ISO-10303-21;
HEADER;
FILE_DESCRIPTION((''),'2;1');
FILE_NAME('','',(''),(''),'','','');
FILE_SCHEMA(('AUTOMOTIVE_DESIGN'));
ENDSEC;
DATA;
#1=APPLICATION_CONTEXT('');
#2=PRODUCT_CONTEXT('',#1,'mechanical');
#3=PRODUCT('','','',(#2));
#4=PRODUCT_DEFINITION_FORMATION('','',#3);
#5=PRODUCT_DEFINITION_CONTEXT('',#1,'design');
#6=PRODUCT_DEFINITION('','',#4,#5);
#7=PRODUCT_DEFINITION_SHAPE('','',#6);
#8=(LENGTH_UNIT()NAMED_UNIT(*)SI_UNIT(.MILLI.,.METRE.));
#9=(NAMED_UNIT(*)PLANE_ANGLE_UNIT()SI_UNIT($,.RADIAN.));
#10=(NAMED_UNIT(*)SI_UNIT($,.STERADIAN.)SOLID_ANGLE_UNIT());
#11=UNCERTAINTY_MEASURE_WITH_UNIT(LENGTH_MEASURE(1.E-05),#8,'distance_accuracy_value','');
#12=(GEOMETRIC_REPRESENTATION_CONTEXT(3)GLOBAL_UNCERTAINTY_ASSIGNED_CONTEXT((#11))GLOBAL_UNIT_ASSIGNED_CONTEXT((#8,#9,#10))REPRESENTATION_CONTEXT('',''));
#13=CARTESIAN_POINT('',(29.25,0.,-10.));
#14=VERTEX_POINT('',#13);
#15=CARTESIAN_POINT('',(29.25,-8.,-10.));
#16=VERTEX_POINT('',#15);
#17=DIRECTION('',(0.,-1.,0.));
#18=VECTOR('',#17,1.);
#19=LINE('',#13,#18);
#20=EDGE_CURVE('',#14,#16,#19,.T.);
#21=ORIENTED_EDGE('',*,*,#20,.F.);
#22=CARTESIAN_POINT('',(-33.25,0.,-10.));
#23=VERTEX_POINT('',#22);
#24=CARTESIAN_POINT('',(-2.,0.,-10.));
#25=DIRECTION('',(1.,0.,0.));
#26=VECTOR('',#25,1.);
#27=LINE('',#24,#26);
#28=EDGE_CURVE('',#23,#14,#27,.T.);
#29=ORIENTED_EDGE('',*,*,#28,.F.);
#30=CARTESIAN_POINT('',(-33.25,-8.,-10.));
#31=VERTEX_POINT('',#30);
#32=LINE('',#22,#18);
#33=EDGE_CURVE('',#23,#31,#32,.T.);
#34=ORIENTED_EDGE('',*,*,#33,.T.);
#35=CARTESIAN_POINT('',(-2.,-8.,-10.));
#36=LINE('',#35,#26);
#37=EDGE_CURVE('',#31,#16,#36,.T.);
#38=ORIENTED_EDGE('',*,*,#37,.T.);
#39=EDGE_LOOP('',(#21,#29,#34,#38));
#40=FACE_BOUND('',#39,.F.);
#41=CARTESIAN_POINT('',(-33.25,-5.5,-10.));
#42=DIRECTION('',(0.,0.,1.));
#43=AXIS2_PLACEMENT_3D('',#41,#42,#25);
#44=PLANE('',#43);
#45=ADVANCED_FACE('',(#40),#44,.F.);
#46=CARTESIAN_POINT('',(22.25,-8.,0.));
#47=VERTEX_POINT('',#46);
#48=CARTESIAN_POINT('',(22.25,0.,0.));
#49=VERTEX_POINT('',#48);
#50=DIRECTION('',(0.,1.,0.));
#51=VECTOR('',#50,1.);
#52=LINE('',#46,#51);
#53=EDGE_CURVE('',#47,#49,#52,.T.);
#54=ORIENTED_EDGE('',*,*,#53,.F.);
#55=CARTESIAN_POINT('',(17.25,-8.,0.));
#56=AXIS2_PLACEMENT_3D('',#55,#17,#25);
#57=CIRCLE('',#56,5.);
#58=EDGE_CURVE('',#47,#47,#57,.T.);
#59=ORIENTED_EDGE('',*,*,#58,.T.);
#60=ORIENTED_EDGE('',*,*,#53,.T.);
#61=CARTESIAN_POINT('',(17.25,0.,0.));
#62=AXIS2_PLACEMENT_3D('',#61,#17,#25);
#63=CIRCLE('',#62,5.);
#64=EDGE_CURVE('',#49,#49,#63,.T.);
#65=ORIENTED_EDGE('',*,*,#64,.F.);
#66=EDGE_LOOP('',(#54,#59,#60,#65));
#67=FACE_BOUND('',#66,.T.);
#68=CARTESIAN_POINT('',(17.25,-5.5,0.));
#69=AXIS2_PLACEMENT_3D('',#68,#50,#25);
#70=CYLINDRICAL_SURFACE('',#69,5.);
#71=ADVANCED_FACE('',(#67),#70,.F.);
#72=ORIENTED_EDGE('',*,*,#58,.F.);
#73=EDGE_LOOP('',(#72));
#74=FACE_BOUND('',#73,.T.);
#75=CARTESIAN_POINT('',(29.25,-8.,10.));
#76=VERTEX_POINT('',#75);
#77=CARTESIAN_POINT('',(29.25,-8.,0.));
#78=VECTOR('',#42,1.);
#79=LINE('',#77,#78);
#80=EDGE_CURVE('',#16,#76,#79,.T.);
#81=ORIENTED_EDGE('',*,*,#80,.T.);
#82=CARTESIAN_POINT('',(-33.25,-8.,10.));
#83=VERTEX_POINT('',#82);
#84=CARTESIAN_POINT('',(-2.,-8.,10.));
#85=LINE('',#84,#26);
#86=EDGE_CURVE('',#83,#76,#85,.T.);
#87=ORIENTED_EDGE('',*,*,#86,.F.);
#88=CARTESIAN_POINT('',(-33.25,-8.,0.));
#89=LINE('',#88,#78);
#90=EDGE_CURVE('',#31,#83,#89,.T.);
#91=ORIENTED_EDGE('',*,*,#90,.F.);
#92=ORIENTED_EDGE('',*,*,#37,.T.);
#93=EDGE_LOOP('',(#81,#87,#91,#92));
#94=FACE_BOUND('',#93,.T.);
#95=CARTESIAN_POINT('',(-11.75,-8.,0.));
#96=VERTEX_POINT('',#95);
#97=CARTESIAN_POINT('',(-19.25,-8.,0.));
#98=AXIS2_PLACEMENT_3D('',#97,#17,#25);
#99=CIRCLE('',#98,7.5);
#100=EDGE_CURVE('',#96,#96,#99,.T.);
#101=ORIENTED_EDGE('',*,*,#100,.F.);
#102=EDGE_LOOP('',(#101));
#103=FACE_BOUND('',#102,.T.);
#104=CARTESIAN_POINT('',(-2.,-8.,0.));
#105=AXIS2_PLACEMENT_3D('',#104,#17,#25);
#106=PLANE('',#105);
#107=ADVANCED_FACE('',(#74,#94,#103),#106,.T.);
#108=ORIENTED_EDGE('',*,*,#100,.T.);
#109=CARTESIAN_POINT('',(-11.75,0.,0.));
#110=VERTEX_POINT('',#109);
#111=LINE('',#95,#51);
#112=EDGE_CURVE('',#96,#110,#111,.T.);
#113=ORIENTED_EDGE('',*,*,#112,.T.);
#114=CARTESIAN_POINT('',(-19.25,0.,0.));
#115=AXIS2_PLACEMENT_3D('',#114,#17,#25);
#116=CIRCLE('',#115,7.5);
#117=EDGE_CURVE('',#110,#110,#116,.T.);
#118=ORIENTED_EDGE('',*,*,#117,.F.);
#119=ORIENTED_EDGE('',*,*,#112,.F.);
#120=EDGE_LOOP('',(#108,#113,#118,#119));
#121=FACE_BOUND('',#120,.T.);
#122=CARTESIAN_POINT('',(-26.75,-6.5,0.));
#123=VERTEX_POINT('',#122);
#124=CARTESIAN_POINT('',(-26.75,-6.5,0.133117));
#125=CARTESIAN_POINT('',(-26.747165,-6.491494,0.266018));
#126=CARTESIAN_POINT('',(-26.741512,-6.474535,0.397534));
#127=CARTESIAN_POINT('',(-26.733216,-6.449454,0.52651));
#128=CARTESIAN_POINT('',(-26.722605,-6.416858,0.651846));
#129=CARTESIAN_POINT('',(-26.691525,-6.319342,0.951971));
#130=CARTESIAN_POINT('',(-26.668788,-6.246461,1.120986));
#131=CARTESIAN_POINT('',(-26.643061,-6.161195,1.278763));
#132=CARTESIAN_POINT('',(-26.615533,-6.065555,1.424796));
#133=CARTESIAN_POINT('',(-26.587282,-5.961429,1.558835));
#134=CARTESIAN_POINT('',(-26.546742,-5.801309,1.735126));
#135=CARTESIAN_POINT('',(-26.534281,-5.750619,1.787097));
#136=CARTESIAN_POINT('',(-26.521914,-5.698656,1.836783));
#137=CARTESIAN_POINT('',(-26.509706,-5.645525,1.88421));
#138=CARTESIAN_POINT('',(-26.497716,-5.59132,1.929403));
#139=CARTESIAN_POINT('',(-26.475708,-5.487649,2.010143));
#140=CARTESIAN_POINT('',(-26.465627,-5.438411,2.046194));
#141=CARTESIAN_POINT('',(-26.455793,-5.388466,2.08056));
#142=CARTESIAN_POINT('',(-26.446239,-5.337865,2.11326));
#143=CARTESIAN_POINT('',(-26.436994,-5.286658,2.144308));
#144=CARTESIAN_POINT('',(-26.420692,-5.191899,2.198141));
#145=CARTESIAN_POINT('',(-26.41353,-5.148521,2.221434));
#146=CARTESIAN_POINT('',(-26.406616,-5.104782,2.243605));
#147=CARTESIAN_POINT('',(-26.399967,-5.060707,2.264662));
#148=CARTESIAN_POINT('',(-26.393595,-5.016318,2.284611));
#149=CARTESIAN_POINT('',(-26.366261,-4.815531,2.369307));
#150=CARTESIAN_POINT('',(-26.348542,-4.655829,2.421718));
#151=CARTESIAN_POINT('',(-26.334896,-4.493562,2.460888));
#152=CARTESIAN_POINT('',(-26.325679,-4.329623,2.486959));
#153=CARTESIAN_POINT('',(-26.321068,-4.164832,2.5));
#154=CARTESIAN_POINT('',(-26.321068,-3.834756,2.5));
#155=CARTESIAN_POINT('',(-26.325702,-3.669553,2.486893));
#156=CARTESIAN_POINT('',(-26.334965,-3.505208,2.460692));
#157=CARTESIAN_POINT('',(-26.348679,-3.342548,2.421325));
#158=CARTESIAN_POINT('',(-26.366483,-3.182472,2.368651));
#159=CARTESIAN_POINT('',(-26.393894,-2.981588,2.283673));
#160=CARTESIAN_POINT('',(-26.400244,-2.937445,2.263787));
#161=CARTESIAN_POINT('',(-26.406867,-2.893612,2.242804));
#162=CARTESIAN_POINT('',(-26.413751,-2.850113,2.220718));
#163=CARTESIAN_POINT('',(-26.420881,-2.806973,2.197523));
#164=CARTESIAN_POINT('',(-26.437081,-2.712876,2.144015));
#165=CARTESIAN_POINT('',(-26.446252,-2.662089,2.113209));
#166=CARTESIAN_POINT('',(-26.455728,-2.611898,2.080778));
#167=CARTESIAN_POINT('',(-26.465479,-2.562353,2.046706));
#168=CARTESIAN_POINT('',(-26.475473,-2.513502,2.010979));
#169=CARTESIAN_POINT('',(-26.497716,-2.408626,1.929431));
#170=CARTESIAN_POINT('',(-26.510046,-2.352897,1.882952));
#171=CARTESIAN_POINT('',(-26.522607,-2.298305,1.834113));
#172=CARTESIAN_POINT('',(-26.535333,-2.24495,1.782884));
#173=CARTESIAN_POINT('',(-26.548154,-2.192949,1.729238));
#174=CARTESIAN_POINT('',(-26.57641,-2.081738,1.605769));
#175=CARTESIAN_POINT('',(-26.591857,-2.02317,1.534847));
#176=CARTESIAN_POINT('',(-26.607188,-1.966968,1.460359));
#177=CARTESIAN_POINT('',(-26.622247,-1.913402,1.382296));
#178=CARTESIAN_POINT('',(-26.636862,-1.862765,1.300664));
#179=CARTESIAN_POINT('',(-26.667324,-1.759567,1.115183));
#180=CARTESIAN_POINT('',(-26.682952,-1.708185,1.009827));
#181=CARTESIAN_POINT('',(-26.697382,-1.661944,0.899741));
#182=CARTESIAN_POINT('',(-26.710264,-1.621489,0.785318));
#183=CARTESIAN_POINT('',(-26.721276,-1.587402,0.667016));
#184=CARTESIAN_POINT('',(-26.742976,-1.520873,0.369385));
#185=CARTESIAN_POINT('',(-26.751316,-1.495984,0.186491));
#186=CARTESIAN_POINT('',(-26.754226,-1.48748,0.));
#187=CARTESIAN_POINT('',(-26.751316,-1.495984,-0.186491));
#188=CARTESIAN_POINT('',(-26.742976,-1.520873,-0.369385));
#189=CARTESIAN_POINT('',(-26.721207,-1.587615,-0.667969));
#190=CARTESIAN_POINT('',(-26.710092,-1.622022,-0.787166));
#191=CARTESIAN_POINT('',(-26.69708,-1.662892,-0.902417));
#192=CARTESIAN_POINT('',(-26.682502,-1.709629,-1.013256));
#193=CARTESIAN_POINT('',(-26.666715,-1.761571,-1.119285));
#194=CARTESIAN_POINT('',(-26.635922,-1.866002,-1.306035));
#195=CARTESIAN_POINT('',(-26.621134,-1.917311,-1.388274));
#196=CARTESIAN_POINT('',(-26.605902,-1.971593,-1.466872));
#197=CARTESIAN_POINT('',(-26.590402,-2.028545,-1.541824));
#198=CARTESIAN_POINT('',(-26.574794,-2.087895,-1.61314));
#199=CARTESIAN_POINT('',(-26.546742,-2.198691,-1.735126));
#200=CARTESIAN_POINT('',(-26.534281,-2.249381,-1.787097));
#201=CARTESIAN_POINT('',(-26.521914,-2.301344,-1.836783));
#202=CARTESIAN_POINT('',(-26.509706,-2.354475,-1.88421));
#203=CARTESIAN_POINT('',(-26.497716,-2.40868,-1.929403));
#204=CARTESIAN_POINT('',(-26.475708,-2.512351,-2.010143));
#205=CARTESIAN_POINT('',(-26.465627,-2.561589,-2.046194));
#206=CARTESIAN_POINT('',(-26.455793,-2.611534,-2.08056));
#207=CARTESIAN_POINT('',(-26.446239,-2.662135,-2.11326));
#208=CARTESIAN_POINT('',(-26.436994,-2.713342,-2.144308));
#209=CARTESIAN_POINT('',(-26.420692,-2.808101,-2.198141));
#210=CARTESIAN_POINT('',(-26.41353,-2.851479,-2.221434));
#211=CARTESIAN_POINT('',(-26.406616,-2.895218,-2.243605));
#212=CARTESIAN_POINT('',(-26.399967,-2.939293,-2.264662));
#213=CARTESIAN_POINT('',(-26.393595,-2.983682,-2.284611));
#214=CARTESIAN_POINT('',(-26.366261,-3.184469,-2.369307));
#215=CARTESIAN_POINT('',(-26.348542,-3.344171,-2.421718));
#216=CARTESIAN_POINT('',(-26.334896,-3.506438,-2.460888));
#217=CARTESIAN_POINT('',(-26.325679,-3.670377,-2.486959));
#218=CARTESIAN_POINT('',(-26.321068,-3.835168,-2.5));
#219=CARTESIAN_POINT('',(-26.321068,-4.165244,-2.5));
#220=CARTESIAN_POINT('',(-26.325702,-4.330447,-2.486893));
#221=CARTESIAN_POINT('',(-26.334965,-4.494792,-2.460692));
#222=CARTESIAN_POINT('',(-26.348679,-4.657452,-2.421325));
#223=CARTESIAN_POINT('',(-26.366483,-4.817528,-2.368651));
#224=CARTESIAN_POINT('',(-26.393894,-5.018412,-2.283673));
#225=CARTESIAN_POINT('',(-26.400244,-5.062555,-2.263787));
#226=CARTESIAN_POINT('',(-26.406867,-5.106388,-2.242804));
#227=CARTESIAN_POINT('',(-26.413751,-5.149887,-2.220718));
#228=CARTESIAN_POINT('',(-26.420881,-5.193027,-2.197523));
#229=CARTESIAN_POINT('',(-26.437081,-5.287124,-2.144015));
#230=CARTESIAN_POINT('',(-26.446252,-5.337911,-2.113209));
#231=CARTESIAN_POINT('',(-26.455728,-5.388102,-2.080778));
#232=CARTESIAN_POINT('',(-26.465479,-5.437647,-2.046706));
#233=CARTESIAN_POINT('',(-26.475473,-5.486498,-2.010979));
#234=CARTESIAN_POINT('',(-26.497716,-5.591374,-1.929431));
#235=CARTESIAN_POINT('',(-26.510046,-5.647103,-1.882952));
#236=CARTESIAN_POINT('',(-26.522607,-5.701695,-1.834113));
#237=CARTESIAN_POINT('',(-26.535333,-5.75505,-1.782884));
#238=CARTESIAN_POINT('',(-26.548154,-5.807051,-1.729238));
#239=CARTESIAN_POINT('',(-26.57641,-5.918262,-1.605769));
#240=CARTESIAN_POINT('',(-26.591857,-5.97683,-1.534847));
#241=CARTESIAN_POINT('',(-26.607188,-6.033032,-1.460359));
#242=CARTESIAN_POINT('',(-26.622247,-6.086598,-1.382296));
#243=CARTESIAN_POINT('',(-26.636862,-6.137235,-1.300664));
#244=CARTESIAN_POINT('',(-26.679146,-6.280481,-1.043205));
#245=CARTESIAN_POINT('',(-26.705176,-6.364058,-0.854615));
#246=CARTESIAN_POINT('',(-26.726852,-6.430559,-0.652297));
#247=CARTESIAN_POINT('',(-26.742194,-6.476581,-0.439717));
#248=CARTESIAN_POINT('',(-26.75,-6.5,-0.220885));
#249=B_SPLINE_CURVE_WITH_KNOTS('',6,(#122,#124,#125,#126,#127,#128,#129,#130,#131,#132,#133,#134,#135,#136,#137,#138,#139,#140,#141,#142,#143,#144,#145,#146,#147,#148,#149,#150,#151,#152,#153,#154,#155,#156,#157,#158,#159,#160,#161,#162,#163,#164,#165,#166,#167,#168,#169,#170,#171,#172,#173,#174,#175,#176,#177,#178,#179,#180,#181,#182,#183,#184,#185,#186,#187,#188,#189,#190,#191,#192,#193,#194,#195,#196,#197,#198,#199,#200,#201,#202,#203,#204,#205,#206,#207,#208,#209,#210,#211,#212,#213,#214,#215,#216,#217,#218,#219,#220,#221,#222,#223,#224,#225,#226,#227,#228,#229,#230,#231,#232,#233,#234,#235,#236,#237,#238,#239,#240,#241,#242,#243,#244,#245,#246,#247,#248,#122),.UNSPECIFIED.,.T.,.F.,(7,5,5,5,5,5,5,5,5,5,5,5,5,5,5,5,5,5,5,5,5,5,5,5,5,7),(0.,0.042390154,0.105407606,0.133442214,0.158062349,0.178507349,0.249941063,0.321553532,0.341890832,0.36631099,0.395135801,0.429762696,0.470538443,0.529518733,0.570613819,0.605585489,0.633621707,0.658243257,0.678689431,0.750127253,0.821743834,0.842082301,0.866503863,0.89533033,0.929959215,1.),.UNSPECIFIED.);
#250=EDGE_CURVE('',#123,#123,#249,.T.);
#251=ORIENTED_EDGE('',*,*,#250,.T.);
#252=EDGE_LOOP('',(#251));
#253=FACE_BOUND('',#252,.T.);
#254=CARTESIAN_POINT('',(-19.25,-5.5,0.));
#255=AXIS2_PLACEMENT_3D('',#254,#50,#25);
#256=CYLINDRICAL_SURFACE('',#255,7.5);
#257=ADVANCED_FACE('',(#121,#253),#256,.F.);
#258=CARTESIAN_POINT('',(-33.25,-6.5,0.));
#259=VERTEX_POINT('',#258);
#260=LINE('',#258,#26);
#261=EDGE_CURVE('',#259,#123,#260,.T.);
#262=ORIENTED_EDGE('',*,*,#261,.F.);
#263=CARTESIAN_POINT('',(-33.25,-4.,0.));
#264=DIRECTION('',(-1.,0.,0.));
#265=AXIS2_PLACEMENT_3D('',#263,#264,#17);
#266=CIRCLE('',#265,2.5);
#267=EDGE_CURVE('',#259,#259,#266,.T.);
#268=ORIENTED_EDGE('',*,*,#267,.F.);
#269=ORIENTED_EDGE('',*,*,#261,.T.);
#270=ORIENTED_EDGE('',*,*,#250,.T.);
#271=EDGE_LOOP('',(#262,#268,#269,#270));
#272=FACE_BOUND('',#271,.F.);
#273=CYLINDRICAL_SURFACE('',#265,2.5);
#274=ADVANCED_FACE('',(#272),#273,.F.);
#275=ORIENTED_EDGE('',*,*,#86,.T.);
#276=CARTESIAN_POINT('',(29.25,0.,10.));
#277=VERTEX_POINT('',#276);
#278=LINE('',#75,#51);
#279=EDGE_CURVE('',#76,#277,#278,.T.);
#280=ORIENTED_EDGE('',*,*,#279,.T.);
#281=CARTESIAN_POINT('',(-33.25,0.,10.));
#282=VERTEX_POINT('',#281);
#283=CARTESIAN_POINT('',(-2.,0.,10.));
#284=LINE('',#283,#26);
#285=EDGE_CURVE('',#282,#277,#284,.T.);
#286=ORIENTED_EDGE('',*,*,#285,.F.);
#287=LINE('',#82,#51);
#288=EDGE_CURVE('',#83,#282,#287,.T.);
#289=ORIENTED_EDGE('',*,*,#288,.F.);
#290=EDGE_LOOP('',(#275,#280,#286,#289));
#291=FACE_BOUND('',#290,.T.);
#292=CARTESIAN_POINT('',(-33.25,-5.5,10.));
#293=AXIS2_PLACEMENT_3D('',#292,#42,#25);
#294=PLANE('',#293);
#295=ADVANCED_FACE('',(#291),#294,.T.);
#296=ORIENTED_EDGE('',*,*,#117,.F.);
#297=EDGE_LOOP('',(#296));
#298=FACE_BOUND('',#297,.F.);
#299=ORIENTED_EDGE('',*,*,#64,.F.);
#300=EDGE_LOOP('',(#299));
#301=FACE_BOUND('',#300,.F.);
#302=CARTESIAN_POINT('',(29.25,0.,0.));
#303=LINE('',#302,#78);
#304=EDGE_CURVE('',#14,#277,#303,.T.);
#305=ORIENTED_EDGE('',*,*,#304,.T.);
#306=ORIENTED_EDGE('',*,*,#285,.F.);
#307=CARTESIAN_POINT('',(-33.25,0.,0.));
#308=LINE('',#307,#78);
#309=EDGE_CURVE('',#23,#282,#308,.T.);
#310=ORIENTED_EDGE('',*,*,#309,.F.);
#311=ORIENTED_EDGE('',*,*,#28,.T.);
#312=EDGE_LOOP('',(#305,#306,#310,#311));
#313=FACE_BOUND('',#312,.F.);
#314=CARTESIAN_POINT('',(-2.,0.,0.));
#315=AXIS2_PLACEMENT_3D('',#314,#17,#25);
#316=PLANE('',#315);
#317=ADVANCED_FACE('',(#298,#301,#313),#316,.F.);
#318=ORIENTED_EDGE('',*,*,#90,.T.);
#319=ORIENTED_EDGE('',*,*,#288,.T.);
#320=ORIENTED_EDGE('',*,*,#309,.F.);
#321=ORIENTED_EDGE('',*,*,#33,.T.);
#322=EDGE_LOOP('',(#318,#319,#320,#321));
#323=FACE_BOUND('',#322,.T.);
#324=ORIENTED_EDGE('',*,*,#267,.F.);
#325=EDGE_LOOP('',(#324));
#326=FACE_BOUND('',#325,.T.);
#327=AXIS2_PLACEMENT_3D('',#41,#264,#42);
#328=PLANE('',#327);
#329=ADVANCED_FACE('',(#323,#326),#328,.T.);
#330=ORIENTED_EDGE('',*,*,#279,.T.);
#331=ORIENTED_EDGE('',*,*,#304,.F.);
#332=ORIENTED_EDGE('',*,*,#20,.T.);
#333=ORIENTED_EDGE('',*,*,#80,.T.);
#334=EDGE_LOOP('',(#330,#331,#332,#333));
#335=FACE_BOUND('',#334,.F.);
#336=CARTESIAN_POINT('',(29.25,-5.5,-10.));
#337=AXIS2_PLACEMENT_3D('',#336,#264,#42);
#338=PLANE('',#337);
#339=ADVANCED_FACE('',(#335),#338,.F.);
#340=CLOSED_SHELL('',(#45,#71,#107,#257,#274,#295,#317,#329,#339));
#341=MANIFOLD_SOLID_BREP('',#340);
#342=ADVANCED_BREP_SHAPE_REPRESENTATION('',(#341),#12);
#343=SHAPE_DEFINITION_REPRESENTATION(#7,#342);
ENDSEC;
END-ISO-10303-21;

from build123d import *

# Parameters (mm, degrees)
F0_W     = 62.5
F0_H     = 20
F0_R     = 7.5
F0_R_2   = 5
F1_DEPTH = 5.5
F2_DEPTH = 2.5
F3_R     = 2.5
F4_DEPTH = 10


# Not quite as in the source:
# - a feature names something its author has since deleted; it is built from what else it names


with BuildPart() as f1:
    # F0 (on Front) → F1 (new body)
    with BuildSketch(Plane.XZ):
        with Locations((-2, 0)):
            Rectangle(F0_W, F0_H)
        with Locations((-19.25, 0)):
            Circle(F0_R, mode=Mode.SUBTRACT)
        with Locations((17.25, 0)):
            Circle(F0_R_2, mode=Mode.SUBTRACT)
    extrude(amount=F1_DEPTH)

    # F2 (add): a face of the model
    f2_faces = [f1.faces().sort_by_distance(p)[0] for p in [
        (-0.4554491501, -5.5, 0),
    ]]
    extrude(f2_faces, amount=F2_DEPTH)

    # F3 (on face) → F4 (cut)
    with BuildSketch(Plane(origin=(-33.25, 0, 0), x_dir=(0, -1, 0), z_dir=(-1, 0, 0))):
        with Locations((4, 0)):
            Circle(F3_R)
    extrude(amount=-F4_DEPTH, mode=Mode.SUBTRACT)


solid = f1.part
